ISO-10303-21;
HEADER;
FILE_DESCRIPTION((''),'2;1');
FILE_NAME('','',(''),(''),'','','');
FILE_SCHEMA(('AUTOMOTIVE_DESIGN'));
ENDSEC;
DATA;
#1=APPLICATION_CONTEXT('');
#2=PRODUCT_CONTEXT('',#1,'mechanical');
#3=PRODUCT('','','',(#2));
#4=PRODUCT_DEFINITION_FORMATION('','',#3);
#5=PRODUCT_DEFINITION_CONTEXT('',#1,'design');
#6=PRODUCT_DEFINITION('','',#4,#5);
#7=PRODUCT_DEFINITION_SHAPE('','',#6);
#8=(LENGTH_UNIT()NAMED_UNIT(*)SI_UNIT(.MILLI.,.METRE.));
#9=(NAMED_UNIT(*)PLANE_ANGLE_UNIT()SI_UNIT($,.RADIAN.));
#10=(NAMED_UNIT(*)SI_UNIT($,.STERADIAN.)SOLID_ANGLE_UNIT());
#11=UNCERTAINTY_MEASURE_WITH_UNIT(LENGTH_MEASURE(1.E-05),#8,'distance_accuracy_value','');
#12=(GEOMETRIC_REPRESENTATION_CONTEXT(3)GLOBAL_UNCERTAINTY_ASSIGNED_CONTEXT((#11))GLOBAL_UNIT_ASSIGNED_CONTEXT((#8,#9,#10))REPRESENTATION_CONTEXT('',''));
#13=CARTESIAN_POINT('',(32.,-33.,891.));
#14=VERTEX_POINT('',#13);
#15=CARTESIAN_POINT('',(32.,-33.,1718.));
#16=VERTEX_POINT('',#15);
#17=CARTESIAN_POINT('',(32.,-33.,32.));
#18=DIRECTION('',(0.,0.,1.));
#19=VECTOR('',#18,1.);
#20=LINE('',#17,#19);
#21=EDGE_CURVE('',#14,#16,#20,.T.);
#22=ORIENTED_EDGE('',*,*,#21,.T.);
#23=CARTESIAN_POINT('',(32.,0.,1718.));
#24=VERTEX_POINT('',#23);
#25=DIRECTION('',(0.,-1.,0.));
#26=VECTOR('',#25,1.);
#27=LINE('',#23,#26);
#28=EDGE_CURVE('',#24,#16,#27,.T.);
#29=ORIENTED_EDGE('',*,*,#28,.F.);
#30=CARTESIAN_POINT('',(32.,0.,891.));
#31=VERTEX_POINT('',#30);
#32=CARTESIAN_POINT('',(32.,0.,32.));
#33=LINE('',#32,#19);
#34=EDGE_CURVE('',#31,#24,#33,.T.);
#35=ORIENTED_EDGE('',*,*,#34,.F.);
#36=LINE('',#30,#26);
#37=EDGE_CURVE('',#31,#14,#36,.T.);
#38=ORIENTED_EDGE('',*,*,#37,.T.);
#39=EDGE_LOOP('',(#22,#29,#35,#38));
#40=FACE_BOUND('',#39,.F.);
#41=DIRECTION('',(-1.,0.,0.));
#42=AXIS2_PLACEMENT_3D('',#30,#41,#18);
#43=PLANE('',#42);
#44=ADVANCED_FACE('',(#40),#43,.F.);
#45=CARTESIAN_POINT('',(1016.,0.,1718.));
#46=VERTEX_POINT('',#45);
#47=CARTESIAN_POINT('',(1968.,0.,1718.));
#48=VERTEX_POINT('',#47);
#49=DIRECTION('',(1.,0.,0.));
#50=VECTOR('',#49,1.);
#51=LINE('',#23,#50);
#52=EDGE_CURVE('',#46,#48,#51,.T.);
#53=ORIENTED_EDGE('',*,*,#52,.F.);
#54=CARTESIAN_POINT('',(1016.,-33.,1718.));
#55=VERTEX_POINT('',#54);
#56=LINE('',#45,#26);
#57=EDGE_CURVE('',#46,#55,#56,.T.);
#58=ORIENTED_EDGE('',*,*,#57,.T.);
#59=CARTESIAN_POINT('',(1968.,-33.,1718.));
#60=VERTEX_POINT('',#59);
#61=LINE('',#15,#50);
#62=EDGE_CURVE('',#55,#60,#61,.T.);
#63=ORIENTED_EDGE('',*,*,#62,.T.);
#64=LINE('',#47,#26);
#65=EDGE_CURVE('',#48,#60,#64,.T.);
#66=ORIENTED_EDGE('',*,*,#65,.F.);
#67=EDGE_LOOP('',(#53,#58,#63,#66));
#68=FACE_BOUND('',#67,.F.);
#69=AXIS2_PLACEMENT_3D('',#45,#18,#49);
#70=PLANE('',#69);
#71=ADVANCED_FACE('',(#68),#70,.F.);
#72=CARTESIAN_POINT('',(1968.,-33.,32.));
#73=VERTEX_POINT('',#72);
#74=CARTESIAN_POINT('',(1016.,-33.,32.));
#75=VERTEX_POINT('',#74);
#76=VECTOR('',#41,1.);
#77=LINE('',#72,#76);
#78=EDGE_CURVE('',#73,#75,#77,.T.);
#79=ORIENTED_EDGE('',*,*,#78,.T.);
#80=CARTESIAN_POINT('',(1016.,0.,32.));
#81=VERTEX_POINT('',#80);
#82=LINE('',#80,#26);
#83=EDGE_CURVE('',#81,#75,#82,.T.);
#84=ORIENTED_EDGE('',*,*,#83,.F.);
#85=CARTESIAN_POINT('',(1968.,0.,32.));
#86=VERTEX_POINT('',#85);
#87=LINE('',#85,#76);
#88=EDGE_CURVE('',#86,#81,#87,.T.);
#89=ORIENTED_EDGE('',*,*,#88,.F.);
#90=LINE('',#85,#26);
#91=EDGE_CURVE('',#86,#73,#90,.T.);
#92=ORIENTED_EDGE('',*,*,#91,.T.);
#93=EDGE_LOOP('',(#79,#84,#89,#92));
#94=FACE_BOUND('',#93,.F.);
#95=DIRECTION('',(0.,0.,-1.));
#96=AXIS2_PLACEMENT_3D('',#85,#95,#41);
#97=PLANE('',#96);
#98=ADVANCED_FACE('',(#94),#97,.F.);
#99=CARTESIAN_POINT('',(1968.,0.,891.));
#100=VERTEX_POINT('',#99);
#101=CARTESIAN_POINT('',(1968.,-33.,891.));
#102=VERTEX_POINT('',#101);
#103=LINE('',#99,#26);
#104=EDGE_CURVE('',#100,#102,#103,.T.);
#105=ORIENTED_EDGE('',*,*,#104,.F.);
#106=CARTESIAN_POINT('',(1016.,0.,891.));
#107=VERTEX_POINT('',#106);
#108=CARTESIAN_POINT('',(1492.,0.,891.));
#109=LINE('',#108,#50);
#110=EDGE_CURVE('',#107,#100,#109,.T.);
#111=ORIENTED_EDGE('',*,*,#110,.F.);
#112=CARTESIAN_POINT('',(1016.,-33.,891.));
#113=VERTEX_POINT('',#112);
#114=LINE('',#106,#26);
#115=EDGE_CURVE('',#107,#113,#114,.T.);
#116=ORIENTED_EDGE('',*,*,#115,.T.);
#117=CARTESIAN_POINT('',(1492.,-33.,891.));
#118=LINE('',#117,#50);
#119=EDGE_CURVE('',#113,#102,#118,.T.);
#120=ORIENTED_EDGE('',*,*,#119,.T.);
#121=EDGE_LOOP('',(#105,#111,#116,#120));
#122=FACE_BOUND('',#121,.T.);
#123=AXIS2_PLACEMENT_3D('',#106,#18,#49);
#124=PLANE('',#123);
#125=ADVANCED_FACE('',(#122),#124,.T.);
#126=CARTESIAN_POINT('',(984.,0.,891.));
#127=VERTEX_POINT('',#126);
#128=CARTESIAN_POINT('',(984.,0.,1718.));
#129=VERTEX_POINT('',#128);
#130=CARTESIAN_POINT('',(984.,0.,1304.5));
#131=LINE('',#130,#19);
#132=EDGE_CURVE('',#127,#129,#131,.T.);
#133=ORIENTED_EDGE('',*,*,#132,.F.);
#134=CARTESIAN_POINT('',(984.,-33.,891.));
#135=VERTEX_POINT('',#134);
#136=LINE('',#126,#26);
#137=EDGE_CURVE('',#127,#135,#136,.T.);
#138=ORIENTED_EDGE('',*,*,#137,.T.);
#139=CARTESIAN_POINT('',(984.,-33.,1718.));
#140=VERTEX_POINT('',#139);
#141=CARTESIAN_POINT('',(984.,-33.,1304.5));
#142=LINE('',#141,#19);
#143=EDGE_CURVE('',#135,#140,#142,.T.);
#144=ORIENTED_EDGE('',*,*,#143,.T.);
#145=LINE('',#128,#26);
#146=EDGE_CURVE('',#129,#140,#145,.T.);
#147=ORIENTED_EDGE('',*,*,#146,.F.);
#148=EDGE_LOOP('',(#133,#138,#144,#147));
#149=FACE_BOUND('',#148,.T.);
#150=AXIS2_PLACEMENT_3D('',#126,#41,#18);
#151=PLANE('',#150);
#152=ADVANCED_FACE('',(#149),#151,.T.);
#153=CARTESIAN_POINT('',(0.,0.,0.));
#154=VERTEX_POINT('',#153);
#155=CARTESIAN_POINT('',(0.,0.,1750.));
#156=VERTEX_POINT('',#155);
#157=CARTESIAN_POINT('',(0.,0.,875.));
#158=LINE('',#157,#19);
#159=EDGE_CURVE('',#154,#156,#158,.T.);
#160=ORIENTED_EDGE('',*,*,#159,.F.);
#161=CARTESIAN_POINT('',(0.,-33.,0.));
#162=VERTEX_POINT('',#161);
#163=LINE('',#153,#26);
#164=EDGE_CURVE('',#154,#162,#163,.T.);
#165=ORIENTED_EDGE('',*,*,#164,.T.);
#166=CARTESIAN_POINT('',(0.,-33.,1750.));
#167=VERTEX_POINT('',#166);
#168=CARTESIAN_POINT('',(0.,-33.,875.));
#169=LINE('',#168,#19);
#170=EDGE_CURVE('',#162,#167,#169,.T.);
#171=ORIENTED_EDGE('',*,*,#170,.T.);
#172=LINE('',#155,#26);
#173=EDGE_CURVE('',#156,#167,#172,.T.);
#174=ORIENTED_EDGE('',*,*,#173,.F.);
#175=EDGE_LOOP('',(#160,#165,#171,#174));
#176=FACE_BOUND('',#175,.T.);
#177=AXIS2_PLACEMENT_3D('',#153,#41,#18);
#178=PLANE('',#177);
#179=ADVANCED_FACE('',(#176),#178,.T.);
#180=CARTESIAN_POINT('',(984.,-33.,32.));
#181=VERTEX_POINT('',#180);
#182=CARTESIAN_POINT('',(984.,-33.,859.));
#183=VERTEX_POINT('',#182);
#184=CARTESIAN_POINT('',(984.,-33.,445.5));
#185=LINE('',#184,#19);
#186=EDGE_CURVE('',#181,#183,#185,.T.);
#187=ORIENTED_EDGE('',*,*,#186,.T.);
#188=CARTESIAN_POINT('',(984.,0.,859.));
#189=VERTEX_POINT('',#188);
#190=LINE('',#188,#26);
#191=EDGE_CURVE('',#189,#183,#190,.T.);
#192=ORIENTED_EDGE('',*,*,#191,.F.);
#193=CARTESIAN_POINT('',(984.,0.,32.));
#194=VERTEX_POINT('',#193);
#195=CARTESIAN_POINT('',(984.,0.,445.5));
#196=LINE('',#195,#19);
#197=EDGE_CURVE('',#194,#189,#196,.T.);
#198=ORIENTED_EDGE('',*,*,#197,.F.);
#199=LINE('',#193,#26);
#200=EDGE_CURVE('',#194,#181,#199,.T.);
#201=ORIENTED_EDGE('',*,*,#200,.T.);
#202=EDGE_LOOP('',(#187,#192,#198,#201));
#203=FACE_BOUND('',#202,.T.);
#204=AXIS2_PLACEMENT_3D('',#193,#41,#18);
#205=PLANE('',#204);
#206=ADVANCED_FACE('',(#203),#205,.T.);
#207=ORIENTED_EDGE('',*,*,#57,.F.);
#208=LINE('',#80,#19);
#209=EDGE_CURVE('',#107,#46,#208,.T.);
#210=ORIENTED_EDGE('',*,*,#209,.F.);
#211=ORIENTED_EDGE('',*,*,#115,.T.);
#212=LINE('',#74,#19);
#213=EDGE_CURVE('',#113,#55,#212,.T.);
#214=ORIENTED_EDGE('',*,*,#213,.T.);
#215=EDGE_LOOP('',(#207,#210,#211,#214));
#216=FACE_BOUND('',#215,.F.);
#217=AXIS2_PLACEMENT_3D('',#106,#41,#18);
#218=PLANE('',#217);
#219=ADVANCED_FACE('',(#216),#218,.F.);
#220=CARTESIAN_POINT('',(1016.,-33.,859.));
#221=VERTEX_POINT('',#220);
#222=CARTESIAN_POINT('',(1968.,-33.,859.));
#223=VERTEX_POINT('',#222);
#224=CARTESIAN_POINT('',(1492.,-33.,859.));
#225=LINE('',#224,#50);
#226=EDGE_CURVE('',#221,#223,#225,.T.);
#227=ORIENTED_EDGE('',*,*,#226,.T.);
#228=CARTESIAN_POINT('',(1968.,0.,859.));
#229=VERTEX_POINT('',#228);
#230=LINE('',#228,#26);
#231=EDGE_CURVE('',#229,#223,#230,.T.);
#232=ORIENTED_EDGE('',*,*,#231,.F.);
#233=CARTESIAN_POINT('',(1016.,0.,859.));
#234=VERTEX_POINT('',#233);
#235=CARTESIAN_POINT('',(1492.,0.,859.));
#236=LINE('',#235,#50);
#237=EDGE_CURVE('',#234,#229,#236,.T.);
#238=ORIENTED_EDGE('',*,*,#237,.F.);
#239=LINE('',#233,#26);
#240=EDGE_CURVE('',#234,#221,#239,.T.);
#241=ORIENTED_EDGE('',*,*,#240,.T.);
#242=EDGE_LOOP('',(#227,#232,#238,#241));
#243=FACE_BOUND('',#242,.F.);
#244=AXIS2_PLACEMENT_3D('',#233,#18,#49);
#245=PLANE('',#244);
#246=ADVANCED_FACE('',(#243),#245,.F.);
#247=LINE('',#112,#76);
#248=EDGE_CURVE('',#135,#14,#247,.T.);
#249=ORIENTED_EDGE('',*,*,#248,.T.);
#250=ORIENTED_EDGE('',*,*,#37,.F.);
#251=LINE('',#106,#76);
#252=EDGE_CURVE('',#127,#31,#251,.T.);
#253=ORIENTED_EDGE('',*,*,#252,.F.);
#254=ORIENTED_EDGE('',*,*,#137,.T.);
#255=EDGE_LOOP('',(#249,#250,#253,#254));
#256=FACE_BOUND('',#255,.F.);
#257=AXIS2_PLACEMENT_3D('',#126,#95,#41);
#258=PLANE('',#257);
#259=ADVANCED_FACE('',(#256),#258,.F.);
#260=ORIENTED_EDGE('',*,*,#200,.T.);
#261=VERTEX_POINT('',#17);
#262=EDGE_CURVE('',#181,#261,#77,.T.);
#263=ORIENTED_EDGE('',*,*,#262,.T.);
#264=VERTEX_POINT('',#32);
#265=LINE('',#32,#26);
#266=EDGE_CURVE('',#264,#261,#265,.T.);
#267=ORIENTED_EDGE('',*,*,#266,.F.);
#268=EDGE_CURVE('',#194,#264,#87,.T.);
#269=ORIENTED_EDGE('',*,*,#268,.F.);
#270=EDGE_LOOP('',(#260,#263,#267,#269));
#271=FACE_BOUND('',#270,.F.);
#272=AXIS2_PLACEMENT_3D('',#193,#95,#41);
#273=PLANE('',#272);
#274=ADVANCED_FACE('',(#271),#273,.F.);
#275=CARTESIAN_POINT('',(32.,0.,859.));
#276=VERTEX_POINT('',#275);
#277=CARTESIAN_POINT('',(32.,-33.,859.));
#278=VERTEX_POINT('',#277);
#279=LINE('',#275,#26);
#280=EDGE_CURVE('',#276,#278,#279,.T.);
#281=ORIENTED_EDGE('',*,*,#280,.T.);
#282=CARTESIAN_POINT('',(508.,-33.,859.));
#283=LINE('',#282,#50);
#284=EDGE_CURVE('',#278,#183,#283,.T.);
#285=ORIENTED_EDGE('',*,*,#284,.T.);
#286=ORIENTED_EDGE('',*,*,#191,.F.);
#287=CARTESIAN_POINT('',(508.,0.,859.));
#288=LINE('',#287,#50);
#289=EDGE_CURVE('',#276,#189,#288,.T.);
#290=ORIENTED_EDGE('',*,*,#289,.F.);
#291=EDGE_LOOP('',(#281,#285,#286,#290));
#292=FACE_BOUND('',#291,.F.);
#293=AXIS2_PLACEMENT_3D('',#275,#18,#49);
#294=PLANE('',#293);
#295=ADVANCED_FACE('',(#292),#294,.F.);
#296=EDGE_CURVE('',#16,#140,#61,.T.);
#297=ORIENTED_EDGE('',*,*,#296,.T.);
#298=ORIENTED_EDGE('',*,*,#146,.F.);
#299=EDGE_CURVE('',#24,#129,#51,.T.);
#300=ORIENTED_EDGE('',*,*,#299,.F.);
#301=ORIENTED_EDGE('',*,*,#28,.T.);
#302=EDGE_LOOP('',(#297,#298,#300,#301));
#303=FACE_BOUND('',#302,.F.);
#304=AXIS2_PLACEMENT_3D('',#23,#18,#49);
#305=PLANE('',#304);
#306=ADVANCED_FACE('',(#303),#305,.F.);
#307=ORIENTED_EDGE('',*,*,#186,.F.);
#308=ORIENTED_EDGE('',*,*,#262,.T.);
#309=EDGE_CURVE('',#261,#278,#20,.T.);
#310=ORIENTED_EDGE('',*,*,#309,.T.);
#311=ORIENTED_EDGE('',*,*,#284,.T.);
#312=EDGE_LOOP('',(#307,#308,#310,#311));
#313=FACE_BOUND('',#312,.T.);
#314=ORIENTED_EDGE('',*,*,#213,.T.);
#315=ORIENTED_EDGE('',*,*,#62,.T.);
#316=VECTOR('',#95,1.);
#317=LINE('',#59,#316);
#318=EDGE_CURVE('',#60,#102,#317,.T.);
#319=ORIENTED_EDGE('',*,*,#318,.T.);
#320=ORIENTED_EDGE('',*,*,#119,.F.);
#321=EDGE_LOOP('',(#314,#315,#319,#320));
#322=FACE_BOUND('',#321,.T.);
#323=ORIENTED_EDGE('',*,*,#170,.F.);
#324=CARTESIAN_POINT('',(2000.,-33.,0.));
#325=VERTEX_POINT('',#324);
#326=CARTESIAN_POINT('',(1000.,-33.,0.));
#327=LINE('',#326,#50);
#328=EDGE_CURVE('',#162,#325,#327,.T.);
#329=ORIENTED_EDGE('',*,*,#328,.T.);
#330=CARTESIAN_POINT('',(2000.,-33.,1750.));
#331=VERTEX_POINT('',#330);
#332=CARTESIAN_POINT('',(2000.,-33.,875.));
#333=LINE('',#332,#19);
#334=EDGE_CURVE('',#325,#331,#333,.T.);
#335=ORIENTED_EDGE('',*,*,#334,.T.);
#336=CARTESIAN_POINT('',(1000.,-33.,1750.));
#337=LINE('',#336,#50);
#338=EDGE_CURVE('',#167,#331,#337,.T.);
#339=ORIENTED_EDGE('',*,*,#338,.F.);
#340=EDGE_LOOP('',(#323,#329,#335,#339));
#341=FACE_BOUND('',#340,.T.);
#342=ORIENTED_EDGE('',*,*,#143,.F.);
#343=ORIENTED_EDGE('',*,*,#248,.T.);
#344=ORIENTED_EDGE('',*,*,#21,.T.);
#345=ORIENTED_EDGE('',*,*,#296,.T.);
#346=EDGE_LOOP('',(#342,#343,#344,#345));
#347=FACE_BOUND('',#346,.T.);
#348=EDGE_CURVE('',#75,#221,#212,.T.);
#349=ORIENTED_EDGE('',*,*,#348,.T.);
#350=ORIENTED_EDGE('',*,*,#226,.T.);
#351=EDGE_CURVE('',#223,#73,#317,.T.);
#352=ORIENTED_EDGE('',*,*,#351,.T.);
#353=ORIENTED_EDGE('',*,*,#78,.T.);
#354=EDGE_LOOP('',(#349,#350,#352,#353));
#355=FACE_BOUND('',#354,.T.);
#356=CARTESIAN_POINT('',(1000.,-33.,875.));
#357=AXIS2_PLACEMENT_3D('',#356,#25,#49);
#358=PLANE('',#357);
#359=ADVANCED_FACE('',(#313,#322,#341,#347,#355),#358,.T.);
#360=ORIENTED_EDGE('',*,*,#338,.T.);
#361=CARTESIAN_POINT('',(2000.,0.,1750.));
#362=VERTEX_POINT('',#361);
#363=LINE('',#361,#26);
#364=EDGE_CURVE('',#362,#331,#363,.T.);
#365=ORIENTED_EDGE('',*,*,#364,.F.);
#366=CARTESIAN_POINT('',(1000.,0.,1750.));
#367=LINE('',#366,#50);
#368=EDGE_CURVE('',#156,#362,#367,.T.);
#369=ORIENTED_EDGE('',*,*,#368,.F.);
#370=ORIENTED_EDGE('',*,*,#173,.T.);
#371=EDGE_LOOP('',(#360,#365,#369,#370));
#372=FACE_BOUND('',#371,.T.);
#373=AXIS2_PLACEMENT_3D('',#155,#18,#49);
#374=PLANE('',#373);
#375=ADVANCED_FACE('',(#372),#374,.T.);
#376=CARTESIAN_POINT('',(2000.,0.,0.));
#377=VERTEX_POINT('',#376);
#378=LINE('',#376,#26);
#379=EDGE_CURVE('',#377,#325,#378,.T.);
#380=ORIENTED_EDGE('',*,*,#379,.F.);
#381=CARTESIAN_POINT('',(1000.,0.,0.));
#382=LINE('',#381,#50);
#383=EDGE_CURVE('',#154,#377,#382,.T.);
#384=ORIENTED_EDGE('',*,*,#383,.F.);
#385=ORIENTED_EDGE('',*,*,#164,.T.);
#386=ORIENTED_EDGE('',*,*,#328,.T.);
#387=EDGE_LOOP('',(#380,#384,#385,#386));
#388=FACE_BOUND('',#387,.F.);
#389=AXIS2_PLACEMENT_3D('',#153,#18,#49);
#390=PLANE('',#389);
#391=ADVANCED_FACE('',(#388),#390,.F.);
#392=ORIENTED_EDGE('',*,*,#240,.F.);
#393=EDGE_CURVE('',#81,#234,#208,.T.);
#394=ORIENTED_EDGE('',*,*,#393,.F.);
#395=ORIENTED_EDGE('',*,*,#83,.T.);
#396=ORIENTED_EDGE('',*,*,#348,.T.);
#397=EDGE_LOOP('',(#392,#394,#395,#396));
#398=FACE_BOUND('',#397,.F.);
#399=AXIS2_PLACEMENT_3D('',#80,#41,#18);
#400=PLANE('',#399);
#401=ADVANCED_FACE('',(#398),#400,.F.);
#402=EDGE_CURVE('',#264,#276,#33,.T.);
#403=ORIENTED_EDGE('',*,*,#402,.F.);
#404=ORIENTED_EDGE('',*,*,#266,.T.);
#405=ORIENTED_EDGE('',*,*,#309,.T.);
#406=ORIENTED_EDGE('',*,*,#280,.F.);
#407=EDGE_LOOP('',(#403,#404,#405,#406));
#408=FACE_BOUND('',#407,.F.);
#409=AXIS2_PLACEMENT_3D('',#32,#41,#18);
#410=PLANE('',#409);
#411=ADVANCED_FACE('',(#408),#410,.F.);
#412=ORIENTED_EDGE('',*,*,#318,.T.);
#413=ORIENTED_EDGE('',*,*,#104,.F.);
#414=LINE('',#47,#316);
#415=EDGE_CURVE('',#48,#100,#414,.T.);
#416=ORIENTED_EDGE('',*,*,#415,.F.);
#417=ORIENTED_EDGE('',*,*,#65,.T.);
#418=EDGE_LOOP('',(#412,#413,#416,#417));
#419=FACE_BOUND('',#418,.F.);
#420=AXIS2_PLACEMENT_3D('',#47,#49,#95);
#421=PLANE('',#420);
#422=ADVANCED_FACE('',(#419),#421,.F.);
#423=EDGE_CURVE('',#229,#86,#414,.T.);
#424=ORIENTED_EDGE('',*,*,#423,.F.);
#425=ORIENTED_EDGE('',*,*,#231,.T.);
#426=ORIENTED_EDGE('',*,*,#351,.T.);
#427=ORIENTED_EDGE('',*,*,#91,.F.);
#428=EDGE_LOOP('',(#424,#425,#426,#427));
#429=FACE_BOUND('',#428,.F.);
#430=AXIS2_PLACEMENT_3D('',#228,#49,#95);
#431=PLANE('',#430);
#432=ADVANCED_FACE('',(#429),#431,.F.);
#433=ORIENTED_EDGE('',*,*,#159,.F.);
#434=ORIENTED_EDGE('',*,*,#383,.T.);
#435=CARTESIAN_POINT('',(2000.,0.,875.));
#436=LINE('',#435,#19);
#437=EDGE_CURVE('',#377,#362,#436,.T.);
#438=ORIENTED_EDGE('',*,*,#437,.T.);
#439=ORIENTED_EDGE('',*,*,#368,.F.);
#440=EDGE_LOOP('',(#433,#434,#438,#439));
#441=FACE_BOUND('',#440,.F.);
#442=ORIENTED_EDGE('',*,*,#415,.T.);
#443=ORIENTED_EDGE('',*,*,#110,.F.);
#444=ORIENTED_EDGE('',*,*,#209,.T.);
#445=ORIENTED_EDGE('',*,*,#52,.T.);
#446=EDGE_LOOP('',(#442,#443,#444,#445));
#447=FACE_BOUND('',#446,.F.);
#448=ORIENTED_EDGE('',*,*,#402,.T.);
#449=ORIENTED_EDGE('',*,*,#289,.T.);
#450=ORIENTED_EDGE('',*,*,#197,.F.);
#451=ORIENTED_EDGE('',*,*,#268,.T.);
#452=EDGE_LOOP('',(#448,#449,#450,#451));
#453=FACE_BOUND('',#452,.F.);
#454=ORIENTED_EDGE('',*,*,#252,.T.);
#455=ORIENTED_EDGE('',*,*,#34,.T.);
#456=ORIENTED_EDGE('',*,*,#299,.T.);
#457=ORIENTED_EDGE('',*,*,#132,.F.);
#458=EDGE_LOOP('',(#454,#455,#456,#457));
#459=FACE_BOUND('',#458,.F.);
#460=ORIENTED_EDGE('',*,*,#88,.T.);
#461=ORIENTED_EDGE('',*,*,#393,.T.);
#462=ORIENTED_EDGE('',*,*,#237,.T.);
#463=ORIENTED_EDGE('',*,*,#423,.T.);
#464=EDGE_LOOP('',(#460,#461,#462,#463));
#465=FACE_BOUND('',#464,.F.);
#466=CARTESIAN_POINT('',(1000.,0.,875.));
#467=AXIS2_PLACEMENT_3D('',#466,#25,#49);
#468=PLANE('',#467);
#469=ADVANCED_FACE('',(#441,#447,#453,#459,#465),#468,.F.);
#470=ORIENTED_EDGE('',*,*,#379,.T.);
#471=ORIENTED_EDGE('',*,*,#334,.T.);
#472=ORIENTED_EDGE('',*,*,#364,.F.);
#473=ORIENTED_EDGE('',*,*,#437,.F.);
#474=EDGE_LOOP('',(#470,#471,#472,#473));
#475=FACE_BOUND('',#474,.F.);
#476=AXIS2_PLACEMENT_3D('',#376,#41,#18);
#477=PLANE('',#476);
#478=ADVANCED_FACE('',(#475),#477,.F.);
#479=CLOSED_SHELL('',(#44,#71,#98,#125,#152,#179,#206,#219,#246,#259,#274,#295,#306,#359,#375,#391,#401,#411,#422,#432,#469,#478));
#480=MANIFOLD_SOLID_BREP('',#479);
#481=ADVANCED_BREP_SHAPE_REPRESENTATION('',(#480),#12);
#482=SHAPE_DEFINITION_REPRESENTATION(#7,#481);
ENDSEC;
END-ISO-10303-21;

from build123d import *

# Parameters (mm, degrees)
F0_W     = 2000
F0_H     = 1750
F0_W_2   = 952
F0_H_2   = 32
F0_W_3   = 32
F0_H_3   = 827
F1_DEPTH = 33


with BuildPart() as f1:
    # F0 (on Front) → F1 (new body)
    with BuildSketch(Plane.XZ):
        with Locations((1000, 875)):
            Rectangle(F0_W, F0_H)
        Polygon((984, 32), (32, 32), (32, 859), (32, 891), (32, 1718), (984, 1718), (1016, 1718), (1968, 1718), (1968, 891), (1968, 859), (1968, 32), (1016, 32), align=None, mode=Mode.SUBTRACT)
        with Locations((508, 875)):
            Rectangle(F0_W_2, F0_H_2)
        with Locations((1000, 445.5)):
            Rectangle(F0_W_3, F0_H_3)
        with Locations((1000, 875)):
            Rectangle(F0_W_3, F0_H_2)
        with Locations((1000, 1304.5)):
            Rectangle(F0_W_3, F0_H_3)
        with Locations((1492, 875)):
            Rectangle(F0_W_2, F0_H_2)
    extrude(amount=F1_DEPTH)


solid = f1.part
